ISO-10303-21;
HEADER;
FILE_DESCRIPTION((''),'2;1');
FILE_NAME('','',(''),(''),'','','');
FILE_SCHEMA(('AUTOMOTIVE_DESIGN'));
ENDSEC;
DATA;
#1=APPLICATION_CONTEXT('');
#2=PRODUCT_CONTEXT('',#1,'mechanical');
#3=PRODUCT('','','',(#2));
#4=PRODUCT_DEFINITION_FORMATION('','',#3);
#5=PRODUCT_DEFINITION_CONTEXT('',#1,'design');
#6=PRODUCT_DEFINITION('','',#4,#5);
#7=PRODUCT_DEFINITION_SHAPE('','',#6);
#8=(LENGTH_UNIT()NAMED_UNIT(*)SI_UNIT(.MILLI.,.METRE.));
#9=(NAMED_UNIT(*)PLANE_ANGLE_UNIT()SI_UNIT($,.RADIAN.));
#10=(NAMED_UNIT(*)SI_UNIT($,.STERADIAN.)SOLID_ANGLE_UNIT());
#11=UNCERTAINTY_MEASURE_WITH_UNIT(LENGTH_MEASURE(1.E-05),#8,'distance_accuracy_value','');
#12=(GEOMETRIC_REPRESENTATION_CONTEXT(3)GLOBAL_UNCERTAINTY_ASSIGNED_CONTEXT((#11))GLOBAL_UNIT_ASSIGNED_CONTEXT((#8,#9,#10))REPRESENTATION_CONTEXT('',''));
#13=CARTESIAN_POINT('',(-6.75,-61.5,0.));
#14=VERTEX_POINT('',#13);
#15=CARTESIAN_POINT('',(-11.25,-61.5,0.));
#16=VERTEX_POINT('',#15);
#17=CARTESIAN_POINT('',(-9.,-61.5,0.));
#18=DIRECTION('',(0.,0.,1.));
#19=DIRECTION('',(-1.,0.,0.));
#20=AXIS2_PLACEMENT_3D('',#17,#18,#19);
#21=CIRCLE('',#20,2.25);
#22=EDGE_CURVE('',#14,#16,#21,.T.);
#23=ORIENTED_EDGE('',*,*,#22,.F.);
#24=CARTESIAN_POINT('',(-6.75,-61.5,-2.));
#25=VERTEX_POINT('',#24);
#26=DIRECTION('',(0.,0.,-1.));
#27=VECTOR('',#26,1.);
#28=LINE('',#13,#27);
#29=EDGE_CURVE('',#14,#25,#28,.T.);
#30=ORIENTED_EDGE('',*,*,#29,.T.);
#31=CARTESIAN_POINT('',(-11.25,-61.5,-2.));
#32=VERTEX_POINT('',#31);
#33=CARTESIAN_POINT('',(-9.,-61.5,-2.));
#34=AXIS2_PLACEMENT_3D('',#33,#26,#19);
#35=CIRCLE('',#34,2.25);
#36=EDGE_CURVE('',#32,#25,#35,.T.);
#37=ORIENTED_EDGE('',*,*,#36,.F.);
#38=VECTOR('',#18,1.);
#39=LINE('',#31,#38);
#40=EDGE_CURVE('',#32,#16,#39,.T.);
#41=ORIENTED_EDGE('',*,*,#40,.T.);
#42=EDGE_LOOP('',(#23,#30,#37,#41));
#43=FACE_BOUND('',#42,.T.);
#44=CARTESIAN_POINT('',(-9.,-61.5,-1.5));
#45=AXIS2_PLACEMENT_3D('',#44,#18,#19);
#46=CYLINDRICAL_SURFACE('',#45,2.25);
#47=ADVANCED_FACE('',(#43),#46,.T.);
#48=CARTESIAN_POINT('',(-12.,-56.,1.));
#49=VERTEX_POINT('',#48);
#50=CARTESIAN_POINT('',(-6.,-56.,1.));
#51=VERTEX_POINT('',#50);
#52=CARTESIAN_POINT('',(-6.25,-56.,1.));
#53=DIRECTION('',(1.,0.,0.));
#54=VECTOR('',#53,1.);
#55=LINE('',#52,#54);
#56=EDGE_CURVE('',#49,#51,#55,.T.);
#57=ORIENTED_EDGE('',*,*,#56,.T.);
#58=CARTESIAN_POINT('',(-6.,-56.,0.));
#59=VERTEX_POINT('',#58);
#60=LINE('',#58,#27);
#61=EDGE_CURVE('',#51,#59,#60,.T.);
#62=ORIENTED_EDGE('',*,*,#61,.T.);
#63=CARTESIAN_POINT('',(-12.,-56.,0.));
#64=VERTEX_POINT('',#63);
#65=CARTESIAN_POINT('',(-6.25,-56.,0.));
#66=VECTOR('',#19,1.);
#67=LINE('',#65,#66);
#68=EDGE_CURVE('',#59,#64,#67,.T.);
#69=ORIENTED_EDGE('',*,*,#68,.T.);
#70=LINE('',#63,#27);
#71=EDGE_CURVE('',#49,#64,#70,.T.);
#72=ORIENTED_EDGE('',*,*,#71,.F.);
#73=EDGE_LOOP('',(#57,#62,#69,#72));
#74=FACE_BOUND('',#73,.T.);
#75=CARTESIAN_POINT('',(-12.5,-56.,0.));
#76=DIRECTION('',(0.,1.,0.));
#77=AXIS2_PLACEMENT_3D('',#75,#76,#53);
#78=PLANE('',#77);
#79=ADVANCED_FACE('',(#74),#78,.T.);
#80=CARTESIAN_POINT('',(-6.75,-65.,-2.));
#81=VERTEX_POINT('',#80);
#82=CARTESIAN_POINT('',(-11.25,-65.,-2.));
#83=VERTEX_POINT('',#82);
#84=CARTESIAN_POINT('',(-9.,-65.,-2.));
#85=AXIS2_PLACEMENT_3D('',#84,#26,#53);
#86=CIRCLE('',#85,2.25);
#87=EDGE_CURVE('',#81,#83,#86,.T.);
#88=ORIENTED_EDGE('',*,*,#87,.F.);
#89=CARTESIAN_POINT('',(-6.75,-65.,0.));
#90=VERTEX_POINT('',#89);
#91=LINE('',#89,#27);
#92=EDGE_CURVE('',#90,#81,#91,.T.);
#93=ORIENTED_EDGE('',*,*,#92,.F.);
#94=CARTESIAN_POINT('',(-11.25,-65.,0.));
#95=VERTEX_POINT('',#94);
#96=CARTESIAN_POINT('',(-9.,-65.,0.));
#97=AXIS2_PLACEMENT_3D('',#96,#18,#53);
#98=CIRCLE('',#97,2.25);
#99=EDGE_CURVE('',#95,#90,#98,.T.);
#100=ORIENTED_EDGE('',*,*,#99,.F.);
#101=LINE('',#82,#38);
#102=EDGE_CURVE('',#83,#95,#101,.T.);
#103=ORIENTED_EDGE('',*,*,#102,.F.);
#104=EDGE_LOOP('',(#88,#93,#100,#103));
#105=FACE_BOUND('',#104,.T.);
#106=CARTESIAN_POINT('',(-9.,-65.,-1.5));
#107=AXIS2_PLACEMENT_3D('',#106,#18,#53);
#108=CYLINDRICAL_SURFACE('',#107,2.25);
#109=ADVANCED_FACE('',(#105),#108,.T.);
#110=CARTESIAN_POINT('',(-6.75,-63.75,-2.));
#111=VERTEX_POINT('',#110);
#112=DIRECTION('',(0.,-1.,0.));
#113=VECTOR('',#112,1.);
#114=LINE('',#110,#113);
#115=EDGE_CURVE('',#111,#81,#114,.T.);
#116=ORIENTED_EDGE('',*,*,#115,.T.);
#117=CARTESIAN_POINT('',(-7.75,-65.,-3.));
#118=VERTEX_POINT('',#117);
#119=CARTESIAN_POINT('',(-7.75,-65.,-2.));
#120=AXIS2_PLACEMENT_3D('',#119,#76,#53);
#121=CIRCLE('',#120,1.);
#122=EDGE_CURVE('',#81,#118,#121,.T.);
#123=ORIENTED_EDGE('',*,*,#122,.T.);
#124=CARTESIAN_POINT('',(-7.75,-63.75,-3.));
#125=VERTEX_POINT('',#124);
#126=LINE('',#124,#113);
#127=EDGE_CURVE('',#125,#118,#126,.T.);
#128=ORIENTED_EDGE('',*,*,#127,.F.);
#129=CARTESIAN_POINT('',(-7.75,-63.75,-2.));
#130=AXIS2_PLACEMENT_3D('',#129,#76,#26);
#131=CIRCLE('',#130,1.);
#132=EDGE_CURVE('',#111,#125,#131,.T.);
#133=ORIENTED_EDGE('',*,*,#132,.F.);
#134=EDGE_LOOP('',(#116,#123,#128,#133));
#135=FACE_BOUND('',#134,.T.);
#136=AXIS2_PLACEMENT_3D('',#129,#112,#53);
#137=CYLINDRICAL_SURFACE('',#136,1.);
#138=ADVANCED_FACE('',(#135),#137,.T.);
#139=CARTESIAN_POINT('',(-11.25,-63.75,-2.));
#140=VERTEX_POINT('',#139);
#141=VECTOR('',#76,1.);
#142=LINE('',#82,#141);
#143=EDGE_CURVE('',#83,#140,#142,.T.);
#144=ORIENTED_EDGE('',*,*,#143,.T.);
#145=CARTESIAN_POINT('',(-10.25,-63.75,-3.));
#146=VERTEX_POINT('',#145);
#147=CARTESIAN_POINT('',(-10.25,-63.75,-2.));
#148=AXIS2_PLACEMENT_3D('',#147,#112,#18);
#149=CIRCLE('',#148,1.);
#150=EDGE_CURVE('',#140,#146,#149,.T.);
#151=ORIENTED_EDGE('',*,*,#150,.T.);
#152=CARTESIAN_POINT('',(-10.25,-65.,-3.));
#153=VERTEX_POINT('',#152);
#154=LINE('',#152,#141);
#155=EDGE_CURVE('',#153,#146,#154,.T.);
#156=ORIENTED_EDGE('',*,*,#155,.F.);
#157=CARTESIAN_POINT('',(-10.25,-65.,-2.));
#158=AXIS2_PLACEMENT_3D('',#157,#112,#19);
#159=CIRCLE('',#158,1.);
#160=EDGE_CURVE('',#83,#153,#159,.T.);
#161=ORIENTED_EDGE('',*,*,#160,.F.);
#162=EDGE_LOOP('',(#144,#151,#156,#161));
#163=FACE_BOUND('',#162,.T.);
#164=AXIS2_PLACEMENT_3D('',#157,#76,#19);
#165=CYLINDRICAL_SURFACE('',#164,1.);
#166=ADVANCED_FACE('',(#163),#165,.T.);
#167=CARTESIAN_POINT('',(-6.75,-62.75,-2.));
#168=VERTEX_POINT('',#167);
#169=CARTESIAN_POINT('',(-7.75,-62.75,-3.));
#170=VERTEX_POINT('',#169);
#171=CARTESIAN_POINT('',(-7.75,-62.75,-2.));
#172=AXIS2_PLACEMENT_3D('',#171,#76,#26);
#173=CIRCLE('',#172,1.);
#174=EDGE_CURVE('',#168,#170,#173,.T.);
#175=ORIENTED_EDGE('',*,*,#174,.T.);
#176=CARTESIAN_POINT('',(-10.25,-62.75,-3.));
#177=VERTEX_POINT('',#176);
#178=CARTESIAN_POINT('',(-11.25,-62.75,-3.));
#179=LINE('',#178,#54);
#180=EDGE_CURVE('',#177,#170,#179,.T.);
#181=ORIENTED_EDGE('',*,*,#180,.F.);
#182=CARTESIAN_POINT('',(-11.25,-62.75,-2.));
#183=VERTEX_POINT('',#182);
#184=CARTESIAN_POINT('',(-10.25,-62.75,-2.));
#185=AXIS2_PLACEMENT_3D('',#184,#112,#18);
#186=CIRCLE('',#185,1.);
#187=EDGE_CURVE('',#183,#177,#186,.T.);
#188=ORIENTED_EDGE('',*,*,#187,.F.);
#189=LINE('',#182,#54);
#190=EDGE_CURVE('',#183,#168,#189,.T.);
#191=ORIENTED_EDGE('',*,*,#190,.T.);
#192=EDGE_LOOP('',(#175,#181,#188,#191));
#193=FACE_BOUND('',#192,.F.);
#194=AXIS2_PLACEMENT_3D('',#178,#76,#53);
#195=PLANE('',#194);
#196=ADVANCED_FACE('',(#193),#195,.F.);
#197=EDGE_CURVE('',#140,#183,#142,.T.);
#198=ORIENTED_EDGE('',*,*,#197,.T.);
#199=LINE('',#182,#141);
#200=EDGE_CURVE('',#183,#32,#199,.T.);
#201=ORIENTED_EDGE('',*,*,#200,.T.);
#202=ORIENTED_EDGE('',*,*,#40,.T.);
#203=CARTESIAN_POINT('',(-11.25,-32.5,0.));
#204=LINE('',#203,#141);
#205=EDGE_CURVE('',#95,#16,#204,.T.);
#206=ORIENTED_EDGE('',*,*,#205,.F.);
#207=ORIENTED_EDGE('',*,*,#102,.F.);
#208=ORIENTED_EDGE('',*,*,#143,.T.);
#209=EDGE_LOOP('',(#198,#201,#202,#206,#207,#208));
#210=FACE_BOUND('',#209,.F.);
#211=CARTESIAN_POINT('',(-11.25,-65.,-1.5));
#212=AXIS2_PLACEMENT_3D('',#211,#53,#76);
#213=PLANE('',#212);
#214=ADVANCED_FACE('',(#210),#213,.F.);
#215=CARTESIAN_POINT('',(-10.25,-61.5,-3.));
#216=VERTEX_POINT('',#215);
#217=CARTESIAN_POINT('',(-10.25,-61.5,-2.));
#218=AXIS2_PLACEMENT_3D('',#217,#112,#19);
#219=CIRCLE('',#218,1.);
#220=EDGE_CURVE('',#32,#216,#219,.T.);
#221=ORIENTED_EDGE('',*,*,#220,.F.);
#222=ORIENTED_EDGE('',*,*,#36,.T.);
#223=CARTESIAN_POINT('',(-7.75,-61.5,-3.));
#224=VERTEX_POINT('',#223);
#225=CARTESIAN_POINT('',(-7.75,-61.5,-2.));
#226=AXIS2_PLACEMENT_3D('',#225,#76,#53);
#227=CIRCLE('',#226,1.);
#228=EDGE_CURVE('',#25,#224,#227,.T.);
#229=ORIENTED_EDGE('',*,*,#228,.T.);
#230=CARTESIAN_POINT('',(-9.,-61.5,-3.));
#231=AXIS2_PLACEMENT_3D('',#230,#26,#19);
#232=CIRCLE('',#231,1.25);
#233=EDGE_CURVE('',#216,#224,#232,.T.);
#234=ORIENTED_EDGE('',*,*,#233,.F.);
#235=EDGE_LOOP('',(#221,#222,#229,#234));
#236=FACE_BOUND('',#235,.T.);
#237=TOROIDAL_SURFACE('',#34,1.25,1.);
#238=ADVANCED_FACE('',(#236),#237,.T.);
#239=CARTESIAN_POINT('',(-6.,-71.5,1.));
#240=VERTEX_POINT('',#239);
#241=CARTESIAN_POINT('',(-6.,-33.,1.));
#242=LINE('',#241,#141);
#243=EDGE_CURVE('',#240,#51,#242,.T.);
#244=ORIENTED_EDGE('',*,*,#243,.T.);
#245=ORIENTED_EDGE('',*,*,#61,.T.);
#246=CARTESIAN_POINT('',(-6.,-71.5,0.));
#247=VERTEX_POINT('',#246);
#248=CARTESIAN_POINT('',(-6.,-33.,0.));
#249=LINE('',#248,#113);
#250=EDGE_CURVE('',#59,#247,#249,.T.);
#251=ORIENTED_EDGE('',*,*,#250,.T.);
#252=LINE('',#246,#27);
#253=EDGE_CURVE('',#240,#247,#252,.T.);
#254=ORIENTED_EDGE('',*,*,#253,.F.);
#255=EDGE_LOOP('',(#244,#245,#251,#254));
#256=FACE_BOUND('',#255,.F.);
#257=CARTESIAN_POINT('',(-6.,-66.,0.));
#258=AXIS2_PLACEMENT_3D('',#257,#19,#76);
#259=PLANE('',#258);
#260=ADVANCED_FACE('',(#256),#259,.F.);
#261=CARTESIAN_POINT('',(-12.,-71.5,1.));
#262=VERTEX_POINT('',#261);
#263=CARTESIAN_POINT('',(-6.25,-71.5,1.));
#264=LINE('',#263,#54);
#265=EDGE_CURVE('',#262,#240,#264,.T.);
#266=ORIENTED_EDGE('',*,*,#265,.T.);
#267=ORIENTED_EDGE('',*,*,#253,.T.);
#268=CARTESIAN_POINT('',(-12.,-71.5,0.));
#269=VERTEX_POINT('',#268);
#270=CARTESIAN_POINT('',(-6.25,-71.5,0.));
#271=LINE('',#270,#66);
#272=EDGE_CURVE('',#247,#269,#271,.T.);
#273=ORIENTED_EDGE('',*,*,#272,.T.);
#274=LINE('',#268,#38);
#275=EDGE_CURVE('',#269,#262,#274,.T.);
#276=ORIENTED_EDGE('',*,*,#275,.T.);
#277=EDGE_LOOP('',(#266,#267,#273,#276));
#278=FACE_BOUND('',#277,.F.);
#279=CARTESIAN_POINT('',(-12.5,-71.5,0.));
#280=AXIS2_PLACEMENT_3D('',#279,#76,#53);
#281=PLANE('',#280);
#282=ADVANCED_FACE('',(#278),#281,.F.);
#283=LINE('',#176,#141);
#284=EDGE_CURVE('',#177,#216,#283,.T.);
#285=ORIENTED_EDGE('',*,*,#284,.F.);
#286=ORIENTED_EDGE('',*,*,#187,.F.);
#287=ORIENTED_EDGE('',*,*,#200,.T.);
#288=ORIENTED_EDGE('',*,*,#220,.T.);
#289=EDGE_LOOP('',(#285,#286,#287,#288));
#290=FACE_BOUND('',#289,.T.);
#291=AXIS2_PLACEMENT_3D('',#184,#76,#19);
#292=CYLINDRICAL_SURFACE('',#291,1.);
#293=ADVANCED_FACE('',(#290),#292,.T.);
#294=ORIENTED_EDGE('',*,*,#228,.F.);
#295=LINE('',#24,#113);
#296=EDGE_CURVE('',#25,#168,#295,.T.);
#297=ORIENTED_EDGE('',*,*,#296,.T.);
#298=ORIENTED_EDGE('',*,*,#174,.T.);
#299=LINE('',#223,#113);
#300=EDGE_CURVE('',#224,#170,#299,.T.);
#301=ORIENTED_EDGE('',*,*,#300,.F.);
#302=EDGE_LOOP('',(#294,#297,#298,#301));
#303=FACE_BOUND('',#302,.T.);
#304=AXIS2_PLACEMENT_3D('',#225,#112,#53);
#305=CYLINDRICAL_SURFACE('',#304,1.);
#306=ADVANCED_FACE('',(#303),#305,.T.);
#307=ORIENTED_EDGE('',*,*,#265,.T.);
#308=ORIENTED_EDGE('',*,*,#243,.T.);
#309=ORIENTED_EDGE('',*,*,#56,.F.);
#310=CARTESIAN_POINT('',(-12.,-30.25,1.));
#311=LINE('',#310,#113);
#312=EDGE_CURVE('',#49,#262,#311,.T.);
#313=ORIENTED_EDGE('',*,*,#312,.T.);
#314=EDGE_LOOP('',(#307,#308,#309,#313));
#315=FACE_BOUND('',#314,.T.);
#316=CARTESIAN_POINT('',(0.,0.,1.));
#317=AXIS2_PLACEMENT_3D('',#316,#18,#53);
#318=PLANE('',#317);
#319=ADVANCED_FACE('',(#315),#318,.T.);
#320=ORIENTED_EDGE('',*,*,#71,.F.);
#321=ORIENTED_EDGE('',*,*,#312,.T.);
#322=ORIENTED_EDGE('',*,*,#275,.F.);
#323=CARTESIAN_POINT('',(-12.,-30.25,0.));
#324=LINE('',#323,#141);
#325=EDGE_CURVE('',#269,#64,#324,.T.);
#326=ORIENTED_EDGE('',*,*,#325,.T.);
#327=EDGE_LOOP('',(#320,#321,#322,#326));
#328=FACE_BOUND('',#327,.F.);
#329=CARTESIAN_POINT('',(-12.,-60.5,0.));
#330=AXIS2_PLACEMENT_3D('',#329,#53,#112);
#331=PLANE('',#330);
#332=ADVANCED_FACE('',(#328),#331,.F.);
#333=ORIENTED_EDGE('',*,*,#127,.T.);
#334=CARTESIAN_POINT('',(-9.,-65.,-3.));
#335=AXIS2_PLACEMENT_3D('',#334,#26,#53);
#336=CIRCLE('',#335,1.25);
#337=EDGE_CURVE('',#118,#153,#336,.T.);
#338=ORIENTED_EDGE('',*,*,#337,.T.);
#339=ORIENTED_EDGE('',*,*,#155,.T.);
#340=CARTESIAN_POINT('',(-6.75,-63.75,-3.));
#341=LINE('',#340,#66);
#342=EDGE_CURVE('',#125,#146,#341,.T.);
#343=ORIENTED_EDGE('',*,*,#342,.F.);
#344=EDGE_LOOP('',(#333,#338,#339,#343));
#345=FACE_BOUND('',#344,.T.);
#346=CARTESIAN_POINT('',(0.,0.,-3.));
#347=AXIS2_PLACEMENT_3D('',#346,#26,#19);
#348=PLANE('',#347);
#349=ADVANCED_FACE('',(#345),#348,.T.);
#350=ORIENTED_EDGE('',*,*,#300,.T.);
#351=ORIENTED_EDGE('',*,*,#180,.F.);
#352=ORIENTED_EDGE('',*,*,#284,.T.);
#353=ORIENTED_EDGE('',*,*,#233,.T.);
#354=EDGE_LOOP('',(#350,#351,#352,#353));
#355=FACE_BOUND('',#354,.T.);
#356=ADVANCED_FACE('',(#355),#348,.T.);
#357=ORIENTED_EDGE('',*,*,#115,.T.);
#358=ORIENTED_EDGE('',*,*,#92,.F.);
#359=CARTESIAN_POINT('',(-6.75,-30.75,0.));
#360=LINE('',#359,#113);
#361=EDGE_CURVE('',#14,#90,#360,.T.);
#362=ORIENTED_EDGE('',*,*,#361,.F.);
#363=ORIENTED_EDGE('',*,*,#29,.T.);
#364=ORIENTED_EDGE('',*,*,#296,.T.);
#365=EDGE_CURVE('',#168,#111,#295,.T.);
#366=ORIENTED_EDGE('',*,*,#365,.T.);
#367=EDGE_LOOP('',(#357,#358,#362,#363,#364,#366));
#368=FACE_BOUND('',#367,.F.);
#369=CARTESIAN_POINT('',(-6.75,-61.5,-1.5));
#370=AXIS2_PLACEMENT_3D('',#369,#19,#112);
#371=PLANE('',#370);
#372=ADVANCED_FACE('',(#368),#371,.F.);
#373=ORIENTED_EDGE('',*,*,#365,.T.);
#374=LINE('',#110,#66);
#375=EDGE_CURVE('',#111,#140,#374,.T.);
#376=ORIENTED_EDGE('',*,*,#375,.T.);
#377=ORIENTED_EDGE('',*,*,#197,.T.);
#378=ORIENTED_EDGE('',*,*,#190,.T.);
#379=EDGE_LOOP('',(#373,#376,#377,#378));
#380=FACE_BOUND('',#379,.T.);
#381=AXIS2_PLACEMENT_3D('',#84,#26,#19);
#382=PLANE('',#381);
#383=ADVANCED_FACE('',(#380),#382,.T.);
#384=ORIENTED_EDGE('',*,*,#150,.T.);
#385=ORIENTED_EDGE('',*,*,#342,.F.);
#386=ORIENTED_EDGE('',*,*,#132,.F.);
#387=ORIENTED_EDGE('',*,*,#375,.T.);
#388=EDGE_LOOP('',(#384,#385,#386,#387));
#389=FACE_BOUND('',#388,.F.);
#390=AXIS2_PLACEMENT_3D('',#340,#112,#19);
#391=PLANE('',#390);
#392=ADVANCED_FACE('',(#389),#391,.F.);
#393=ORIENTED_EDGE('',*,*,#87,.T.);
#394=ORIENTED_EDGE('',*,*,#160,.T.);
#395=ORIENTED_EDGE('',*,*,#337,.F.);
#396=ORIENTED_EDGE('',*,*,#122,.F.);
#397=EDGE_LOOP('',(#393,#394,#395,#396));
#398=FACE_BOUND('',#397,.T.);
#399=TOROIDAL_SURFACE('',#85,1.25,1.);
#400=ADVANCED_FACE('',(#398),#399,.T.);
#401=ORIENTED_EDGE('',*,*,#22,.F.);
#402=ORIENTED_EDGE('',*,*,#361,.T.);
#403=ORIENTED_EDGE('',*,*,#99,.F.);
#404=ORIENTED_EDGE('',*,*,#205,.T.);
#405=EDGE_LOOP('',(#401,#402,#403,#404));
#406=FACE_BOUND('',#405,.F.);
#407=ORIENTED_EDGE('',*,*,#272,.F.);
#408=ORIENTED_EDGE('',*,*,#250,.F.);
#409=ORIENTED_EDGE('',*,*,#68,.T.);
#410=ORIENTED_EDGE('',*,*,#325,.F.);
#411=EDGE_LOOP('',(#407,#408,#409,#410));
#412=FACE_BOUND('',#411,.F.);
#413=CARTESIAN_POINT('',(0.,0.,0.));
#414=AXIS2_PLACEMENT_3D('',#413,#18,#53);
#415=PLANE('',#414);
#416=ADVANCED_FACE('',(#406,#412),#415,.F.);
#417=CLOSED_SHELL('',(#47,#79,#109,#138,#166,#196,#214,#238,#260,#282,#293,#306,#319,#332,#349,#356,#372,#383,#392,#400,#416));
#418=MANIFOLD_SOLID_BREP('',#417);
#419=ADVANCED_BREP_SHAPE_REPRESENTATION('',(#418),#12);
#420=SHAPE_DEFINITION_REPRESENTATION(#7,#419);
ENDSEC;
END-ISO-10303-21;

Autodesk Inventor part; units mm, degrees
ref_plane "YZ Plane" through (0, 0, 0) normal (1, 0, 0) x (0, 1, 0)
ref_plane "XZ Plane" through (0, 0, 0) normal (0, 1, 0) x (-1, 0, 0)
ref_plane "XY Plane" through (0, 0, 0) normal (0, 0, 1) x (1, 0, 0)
ref_plane "Work Plane1" through (0, 0, -1.5) normal (0, 0, -1) x (-1, 0, 0)
sketch "Sketch1" plane through (0, 0, -1.5) normal (0, 0, -1) x (-1, 0, 0)
  line L0 (11.5, -60) -> (11.5, -65) projected
  arc A0 (9.3, -67.4819) -> (11.5, -65) centre (9, -65) ccw projected
  arc A1 (11.5, -60) -> (9.3, -57.5181) centre (9, -60) ccw projected
  line L1 (15, -75) -> (9.3, -75) projected
  line L2 (15, -5) -> (15, -75) projected
  line L3 (9.3, -5) -> (15, -5) projected
  line L4 (6.75, -60) -> (6.75, -65)
  arc A2 (6.75, -65) -> (11.25, -65) centre (9, -65) ccw
  line L5 (11.25, -65) -> (11.25, -60)
  arc A3 (11.25, -60) -> (6.75, -60) centre (9, -60) ccw
  line L6 (9, -65) -> (9, -61.5) construction
  line L7 (6.75, -65) -> (6.75, -61.5)
  line L8 (11.25, -61.5) -> (11.25, -65)
  arc A4 (6.75, -65) -> (11.25, -65) centre (9, -65) ccw
  arc A5 (11.25, -61.5) -> (6.75, -61.5) centre (9, -61.5) ccw
  line L9 (9.3, -57.5181) -> (9.3, -5) projected
  line L10 (9.3, -75) -> (9.3, -67.4819) projected
  point P0 (0, 0)
  point P1 (9, -63.25)
  dimension "d0" = 0.25
  dimension "d1" = 3.5
extrude "Extrusion1" add sketch "Sketch1" along normal blind 0.5 and the other way blind 1.5 contours A5 L5 A2 L4
sketch "Sketch2" plane through (0, 0, 0) normal (0, 0, 1) x (1, 0, 0)
  line L0 (-6.75, -65) -> (-6.75, -61.5) projected
  arc A0 (-6.75, -61.5) -> (-11.25, -61.5) centre (-9, -61.5) ccw projected
  line L1 (-11.25, -61.5) -> (-11.25, -65) projected
  arc A1 (-11.25, -65) -> (-6.75, -65) centre (-9, -65) ccw projected
  line L2 (-12.5, -69.5) -> (-5.5, -69.5)
  line L3 (-5.5, -69.5) -> (-5.5, -60.5)
  line L4 (-5.5, -60.5) -> (-12.5, -60.5)
  line L5 (-12.5, -60.5) -> (-12.5, -69.5)
  line L6 (-12.5, -69.5) -> (-5.5, -60.5) construction
  line L7 (-5.5, -69.5) -> (-12.5, -60.5) construction
  line L8 (-12.5, -57) -> (-5.5, -57)
  line L9 (-5.5, -57) -> (-5.5, -66)
  line L10 (-5.5, -66) -> (-12.5, -66)
  line L11 (-12.5, -66) -> (-12.5, -57)
  line L12 (-12.5, -57) -> (-5.5, -66) construction
  line L13 (-5.5, -57) -> (-12.5, -66) construction
  point P0 (0, 0)
  dimension "d6" = 7
  dimension "d7" = 7
  dimension "d9" = 9
extrude "Extrusion2" add sketch "Sketch2" along normal blind 1
ref_plane "Work Plane2" through (-10.6833, -67.2, 6.3) normal (-1, 0, 0) x (0, 0, 1)
sketch "Sketch3" plane through (-10.6833, -67.2, 6.3) normal (-1, 0, 0) x (0, 0, 1)
  line L0 (0.322, -0.2398) -> (-0.378, -0.2398) projected
  line L1 (-0.378, -1.4398) -> (-0.378, -0.2398) projected
  line L2 (-0.378, -1.4398) -> (0.322, -1.4398) projected
  line L3 (0.322, -1.4398) -> (0.322, -0.2398) projected
  line L4 (0.272, 0.6602) -> (-1.028, 0.6602)
  line L5 (-1.028, 0.6602) -> (-1.028, -2.3398)
  line L6 (-1.028, -2.3398) -> (0.272, -2.3398)
  line L7 (0.272, -2.3398) -> (0.272, 0.6602)
  line L8 (0.272, 0.6602) -> (-1.028, -2.3398) construction
  line L9 (-1.028, 0.6602) -> (0.272, -2.3398) construction
  line L10 (-1.028, -2.3398) -> (-5.3, -2.3398)
  line L11 (0.272, 0.6602) -> (-5.3, 3.95)
  line L12 (-5.3, -2.3) -> (-5.3, 10.2) projected
  line L13 (-5.3, 3.95) -> (-5.3, -2.3398)
  point P0 (-6.3, 67.2)
  point P1 (-0.378, -0.8398)
  point P2 (-5.3, -0.9)
  point P3 (0.272, -1.4398)
  point P4 (0.272, -0.2398)
  dimension "d12" = 1.3
  dimension "d13" = 3
extrude "Extrusion3" add sketch "Sketch3" along normal mid plane 2 contours L0 L1 L2 L7 L6 L5 L4 | L4 L5 L10 L13 L12 L11
sketch "Sketch4" plane through (-12.5, -69.5, 0) normal (0, -1, 0) x (1, 0, 0)
  point P0 (12.5, 0)
move faces "Move1" translate (0, 0, 0.5) faces at (-6.8944, -63.25, 1)
ref_plane "Work Plane3" through (-9.4833, -47.5, 19.3) normal (-1, 0, 0) x (0, 0, 1)
sketch "Sketch5" plane through (-11.6833, -69.5398, 6.572) normal (0, -1, 0) x (1, 0, 0)
  line L0 (2, 0) -> (0, 0) projected
  line L1 (0, -5.572) -> (0, 0) projected
  line L2 (2, -5.572) -> (0, -5.572) projected
  line L3 (2, 0) -> (2, -5.572) projected
  point P0 (11.6833, -6.572)
extrude "Extrusion4" cut sketch "Sketch5" against normal blind 7
move faces "Move3" translate (0, 0, -0.5) faces at (-6.8944, -63.0133, 1.5)
thicken "Thicken1" operation add thickness 0.5 both sides no extend neighbours yes toward (-1, 0, 0) faces at (-5.5, -65.3333, 0.6667)
thicken "Thicken2" operation add thickness 0.5 both sides no extend neighbours yes toward (1, 0, 0) faces at (-12.5, -61.1667, 0.3333)
thicken "Thicken3" operation add thickness 2 both sides no extend neighbours yes toward (0, -1, 0) faces at (-10, -69.5, 0.6667)
thicken "Thicken4" operation add thickness 1 both sides no extend neighbours yes toward (0, 1, 0) faces at (-8, -57, 0.3333)
move faces "Move4" translate (0, 0, -1) faces at (-9.75, -63.8333, -2)
sketch "Sketch6" plane through (-9, -65, -3) normal (0, 0, -1) x (-1, 0, 0)
  line L0 (-2.25, 3.5) -> (-2.25, 0) projected
  arc A0 (-2.25, 0) -> (2.25, 0) centre (0, 0) ccw projected
  line L1 (2.25, 0) -> (2.25, 3.5) projected
  arc A1 (2.25, 3.5) -> (-2.25, 3.5) centre (0, 3.5) ccw projected
  line L2 (-2.25, 3.5) -> (-2.25, 0) projected
  line L3 (2.25, 2.25) -> (-2.25, 2.25)
  line L4 (-2.25, 2.25) -> (-2.25, 1.25)
  line L5 (-2.25, 1.25) -> (2.25, 1.25)
  line L6 (2.25, 1.25) -> (2.25, 2.25)
  line L7 (2.25, 2.25) -> (-2.25, 1.25) construction
  line L8 (-2.25, 2.25) -> (2.25, 1.25) construction
  point P0 (-9, 65)
  point P1 (0, 1.75)
  point P2 (-2.25, 1.25)
  point P3 (2.25, 1.25)
  point P4 (2.25, 2.25)
  point P5 (-2.25, 2.25)
  dimension "d38" = 1
extrude "Extrusion5" cut sketch "Sketch6" against normal blind 1 contours L3 L1 L5 L0
fillet "Fillet1" radius 1 6 edges at (-6.75, -62.125, -3) (-11.25, -62.125, -3) (-9, -59.25, -3) (-11.25, -64.375, -3) (-6.75, -64.375, -3) (-9, -67.25, -3)
properties part number "switch_a"
